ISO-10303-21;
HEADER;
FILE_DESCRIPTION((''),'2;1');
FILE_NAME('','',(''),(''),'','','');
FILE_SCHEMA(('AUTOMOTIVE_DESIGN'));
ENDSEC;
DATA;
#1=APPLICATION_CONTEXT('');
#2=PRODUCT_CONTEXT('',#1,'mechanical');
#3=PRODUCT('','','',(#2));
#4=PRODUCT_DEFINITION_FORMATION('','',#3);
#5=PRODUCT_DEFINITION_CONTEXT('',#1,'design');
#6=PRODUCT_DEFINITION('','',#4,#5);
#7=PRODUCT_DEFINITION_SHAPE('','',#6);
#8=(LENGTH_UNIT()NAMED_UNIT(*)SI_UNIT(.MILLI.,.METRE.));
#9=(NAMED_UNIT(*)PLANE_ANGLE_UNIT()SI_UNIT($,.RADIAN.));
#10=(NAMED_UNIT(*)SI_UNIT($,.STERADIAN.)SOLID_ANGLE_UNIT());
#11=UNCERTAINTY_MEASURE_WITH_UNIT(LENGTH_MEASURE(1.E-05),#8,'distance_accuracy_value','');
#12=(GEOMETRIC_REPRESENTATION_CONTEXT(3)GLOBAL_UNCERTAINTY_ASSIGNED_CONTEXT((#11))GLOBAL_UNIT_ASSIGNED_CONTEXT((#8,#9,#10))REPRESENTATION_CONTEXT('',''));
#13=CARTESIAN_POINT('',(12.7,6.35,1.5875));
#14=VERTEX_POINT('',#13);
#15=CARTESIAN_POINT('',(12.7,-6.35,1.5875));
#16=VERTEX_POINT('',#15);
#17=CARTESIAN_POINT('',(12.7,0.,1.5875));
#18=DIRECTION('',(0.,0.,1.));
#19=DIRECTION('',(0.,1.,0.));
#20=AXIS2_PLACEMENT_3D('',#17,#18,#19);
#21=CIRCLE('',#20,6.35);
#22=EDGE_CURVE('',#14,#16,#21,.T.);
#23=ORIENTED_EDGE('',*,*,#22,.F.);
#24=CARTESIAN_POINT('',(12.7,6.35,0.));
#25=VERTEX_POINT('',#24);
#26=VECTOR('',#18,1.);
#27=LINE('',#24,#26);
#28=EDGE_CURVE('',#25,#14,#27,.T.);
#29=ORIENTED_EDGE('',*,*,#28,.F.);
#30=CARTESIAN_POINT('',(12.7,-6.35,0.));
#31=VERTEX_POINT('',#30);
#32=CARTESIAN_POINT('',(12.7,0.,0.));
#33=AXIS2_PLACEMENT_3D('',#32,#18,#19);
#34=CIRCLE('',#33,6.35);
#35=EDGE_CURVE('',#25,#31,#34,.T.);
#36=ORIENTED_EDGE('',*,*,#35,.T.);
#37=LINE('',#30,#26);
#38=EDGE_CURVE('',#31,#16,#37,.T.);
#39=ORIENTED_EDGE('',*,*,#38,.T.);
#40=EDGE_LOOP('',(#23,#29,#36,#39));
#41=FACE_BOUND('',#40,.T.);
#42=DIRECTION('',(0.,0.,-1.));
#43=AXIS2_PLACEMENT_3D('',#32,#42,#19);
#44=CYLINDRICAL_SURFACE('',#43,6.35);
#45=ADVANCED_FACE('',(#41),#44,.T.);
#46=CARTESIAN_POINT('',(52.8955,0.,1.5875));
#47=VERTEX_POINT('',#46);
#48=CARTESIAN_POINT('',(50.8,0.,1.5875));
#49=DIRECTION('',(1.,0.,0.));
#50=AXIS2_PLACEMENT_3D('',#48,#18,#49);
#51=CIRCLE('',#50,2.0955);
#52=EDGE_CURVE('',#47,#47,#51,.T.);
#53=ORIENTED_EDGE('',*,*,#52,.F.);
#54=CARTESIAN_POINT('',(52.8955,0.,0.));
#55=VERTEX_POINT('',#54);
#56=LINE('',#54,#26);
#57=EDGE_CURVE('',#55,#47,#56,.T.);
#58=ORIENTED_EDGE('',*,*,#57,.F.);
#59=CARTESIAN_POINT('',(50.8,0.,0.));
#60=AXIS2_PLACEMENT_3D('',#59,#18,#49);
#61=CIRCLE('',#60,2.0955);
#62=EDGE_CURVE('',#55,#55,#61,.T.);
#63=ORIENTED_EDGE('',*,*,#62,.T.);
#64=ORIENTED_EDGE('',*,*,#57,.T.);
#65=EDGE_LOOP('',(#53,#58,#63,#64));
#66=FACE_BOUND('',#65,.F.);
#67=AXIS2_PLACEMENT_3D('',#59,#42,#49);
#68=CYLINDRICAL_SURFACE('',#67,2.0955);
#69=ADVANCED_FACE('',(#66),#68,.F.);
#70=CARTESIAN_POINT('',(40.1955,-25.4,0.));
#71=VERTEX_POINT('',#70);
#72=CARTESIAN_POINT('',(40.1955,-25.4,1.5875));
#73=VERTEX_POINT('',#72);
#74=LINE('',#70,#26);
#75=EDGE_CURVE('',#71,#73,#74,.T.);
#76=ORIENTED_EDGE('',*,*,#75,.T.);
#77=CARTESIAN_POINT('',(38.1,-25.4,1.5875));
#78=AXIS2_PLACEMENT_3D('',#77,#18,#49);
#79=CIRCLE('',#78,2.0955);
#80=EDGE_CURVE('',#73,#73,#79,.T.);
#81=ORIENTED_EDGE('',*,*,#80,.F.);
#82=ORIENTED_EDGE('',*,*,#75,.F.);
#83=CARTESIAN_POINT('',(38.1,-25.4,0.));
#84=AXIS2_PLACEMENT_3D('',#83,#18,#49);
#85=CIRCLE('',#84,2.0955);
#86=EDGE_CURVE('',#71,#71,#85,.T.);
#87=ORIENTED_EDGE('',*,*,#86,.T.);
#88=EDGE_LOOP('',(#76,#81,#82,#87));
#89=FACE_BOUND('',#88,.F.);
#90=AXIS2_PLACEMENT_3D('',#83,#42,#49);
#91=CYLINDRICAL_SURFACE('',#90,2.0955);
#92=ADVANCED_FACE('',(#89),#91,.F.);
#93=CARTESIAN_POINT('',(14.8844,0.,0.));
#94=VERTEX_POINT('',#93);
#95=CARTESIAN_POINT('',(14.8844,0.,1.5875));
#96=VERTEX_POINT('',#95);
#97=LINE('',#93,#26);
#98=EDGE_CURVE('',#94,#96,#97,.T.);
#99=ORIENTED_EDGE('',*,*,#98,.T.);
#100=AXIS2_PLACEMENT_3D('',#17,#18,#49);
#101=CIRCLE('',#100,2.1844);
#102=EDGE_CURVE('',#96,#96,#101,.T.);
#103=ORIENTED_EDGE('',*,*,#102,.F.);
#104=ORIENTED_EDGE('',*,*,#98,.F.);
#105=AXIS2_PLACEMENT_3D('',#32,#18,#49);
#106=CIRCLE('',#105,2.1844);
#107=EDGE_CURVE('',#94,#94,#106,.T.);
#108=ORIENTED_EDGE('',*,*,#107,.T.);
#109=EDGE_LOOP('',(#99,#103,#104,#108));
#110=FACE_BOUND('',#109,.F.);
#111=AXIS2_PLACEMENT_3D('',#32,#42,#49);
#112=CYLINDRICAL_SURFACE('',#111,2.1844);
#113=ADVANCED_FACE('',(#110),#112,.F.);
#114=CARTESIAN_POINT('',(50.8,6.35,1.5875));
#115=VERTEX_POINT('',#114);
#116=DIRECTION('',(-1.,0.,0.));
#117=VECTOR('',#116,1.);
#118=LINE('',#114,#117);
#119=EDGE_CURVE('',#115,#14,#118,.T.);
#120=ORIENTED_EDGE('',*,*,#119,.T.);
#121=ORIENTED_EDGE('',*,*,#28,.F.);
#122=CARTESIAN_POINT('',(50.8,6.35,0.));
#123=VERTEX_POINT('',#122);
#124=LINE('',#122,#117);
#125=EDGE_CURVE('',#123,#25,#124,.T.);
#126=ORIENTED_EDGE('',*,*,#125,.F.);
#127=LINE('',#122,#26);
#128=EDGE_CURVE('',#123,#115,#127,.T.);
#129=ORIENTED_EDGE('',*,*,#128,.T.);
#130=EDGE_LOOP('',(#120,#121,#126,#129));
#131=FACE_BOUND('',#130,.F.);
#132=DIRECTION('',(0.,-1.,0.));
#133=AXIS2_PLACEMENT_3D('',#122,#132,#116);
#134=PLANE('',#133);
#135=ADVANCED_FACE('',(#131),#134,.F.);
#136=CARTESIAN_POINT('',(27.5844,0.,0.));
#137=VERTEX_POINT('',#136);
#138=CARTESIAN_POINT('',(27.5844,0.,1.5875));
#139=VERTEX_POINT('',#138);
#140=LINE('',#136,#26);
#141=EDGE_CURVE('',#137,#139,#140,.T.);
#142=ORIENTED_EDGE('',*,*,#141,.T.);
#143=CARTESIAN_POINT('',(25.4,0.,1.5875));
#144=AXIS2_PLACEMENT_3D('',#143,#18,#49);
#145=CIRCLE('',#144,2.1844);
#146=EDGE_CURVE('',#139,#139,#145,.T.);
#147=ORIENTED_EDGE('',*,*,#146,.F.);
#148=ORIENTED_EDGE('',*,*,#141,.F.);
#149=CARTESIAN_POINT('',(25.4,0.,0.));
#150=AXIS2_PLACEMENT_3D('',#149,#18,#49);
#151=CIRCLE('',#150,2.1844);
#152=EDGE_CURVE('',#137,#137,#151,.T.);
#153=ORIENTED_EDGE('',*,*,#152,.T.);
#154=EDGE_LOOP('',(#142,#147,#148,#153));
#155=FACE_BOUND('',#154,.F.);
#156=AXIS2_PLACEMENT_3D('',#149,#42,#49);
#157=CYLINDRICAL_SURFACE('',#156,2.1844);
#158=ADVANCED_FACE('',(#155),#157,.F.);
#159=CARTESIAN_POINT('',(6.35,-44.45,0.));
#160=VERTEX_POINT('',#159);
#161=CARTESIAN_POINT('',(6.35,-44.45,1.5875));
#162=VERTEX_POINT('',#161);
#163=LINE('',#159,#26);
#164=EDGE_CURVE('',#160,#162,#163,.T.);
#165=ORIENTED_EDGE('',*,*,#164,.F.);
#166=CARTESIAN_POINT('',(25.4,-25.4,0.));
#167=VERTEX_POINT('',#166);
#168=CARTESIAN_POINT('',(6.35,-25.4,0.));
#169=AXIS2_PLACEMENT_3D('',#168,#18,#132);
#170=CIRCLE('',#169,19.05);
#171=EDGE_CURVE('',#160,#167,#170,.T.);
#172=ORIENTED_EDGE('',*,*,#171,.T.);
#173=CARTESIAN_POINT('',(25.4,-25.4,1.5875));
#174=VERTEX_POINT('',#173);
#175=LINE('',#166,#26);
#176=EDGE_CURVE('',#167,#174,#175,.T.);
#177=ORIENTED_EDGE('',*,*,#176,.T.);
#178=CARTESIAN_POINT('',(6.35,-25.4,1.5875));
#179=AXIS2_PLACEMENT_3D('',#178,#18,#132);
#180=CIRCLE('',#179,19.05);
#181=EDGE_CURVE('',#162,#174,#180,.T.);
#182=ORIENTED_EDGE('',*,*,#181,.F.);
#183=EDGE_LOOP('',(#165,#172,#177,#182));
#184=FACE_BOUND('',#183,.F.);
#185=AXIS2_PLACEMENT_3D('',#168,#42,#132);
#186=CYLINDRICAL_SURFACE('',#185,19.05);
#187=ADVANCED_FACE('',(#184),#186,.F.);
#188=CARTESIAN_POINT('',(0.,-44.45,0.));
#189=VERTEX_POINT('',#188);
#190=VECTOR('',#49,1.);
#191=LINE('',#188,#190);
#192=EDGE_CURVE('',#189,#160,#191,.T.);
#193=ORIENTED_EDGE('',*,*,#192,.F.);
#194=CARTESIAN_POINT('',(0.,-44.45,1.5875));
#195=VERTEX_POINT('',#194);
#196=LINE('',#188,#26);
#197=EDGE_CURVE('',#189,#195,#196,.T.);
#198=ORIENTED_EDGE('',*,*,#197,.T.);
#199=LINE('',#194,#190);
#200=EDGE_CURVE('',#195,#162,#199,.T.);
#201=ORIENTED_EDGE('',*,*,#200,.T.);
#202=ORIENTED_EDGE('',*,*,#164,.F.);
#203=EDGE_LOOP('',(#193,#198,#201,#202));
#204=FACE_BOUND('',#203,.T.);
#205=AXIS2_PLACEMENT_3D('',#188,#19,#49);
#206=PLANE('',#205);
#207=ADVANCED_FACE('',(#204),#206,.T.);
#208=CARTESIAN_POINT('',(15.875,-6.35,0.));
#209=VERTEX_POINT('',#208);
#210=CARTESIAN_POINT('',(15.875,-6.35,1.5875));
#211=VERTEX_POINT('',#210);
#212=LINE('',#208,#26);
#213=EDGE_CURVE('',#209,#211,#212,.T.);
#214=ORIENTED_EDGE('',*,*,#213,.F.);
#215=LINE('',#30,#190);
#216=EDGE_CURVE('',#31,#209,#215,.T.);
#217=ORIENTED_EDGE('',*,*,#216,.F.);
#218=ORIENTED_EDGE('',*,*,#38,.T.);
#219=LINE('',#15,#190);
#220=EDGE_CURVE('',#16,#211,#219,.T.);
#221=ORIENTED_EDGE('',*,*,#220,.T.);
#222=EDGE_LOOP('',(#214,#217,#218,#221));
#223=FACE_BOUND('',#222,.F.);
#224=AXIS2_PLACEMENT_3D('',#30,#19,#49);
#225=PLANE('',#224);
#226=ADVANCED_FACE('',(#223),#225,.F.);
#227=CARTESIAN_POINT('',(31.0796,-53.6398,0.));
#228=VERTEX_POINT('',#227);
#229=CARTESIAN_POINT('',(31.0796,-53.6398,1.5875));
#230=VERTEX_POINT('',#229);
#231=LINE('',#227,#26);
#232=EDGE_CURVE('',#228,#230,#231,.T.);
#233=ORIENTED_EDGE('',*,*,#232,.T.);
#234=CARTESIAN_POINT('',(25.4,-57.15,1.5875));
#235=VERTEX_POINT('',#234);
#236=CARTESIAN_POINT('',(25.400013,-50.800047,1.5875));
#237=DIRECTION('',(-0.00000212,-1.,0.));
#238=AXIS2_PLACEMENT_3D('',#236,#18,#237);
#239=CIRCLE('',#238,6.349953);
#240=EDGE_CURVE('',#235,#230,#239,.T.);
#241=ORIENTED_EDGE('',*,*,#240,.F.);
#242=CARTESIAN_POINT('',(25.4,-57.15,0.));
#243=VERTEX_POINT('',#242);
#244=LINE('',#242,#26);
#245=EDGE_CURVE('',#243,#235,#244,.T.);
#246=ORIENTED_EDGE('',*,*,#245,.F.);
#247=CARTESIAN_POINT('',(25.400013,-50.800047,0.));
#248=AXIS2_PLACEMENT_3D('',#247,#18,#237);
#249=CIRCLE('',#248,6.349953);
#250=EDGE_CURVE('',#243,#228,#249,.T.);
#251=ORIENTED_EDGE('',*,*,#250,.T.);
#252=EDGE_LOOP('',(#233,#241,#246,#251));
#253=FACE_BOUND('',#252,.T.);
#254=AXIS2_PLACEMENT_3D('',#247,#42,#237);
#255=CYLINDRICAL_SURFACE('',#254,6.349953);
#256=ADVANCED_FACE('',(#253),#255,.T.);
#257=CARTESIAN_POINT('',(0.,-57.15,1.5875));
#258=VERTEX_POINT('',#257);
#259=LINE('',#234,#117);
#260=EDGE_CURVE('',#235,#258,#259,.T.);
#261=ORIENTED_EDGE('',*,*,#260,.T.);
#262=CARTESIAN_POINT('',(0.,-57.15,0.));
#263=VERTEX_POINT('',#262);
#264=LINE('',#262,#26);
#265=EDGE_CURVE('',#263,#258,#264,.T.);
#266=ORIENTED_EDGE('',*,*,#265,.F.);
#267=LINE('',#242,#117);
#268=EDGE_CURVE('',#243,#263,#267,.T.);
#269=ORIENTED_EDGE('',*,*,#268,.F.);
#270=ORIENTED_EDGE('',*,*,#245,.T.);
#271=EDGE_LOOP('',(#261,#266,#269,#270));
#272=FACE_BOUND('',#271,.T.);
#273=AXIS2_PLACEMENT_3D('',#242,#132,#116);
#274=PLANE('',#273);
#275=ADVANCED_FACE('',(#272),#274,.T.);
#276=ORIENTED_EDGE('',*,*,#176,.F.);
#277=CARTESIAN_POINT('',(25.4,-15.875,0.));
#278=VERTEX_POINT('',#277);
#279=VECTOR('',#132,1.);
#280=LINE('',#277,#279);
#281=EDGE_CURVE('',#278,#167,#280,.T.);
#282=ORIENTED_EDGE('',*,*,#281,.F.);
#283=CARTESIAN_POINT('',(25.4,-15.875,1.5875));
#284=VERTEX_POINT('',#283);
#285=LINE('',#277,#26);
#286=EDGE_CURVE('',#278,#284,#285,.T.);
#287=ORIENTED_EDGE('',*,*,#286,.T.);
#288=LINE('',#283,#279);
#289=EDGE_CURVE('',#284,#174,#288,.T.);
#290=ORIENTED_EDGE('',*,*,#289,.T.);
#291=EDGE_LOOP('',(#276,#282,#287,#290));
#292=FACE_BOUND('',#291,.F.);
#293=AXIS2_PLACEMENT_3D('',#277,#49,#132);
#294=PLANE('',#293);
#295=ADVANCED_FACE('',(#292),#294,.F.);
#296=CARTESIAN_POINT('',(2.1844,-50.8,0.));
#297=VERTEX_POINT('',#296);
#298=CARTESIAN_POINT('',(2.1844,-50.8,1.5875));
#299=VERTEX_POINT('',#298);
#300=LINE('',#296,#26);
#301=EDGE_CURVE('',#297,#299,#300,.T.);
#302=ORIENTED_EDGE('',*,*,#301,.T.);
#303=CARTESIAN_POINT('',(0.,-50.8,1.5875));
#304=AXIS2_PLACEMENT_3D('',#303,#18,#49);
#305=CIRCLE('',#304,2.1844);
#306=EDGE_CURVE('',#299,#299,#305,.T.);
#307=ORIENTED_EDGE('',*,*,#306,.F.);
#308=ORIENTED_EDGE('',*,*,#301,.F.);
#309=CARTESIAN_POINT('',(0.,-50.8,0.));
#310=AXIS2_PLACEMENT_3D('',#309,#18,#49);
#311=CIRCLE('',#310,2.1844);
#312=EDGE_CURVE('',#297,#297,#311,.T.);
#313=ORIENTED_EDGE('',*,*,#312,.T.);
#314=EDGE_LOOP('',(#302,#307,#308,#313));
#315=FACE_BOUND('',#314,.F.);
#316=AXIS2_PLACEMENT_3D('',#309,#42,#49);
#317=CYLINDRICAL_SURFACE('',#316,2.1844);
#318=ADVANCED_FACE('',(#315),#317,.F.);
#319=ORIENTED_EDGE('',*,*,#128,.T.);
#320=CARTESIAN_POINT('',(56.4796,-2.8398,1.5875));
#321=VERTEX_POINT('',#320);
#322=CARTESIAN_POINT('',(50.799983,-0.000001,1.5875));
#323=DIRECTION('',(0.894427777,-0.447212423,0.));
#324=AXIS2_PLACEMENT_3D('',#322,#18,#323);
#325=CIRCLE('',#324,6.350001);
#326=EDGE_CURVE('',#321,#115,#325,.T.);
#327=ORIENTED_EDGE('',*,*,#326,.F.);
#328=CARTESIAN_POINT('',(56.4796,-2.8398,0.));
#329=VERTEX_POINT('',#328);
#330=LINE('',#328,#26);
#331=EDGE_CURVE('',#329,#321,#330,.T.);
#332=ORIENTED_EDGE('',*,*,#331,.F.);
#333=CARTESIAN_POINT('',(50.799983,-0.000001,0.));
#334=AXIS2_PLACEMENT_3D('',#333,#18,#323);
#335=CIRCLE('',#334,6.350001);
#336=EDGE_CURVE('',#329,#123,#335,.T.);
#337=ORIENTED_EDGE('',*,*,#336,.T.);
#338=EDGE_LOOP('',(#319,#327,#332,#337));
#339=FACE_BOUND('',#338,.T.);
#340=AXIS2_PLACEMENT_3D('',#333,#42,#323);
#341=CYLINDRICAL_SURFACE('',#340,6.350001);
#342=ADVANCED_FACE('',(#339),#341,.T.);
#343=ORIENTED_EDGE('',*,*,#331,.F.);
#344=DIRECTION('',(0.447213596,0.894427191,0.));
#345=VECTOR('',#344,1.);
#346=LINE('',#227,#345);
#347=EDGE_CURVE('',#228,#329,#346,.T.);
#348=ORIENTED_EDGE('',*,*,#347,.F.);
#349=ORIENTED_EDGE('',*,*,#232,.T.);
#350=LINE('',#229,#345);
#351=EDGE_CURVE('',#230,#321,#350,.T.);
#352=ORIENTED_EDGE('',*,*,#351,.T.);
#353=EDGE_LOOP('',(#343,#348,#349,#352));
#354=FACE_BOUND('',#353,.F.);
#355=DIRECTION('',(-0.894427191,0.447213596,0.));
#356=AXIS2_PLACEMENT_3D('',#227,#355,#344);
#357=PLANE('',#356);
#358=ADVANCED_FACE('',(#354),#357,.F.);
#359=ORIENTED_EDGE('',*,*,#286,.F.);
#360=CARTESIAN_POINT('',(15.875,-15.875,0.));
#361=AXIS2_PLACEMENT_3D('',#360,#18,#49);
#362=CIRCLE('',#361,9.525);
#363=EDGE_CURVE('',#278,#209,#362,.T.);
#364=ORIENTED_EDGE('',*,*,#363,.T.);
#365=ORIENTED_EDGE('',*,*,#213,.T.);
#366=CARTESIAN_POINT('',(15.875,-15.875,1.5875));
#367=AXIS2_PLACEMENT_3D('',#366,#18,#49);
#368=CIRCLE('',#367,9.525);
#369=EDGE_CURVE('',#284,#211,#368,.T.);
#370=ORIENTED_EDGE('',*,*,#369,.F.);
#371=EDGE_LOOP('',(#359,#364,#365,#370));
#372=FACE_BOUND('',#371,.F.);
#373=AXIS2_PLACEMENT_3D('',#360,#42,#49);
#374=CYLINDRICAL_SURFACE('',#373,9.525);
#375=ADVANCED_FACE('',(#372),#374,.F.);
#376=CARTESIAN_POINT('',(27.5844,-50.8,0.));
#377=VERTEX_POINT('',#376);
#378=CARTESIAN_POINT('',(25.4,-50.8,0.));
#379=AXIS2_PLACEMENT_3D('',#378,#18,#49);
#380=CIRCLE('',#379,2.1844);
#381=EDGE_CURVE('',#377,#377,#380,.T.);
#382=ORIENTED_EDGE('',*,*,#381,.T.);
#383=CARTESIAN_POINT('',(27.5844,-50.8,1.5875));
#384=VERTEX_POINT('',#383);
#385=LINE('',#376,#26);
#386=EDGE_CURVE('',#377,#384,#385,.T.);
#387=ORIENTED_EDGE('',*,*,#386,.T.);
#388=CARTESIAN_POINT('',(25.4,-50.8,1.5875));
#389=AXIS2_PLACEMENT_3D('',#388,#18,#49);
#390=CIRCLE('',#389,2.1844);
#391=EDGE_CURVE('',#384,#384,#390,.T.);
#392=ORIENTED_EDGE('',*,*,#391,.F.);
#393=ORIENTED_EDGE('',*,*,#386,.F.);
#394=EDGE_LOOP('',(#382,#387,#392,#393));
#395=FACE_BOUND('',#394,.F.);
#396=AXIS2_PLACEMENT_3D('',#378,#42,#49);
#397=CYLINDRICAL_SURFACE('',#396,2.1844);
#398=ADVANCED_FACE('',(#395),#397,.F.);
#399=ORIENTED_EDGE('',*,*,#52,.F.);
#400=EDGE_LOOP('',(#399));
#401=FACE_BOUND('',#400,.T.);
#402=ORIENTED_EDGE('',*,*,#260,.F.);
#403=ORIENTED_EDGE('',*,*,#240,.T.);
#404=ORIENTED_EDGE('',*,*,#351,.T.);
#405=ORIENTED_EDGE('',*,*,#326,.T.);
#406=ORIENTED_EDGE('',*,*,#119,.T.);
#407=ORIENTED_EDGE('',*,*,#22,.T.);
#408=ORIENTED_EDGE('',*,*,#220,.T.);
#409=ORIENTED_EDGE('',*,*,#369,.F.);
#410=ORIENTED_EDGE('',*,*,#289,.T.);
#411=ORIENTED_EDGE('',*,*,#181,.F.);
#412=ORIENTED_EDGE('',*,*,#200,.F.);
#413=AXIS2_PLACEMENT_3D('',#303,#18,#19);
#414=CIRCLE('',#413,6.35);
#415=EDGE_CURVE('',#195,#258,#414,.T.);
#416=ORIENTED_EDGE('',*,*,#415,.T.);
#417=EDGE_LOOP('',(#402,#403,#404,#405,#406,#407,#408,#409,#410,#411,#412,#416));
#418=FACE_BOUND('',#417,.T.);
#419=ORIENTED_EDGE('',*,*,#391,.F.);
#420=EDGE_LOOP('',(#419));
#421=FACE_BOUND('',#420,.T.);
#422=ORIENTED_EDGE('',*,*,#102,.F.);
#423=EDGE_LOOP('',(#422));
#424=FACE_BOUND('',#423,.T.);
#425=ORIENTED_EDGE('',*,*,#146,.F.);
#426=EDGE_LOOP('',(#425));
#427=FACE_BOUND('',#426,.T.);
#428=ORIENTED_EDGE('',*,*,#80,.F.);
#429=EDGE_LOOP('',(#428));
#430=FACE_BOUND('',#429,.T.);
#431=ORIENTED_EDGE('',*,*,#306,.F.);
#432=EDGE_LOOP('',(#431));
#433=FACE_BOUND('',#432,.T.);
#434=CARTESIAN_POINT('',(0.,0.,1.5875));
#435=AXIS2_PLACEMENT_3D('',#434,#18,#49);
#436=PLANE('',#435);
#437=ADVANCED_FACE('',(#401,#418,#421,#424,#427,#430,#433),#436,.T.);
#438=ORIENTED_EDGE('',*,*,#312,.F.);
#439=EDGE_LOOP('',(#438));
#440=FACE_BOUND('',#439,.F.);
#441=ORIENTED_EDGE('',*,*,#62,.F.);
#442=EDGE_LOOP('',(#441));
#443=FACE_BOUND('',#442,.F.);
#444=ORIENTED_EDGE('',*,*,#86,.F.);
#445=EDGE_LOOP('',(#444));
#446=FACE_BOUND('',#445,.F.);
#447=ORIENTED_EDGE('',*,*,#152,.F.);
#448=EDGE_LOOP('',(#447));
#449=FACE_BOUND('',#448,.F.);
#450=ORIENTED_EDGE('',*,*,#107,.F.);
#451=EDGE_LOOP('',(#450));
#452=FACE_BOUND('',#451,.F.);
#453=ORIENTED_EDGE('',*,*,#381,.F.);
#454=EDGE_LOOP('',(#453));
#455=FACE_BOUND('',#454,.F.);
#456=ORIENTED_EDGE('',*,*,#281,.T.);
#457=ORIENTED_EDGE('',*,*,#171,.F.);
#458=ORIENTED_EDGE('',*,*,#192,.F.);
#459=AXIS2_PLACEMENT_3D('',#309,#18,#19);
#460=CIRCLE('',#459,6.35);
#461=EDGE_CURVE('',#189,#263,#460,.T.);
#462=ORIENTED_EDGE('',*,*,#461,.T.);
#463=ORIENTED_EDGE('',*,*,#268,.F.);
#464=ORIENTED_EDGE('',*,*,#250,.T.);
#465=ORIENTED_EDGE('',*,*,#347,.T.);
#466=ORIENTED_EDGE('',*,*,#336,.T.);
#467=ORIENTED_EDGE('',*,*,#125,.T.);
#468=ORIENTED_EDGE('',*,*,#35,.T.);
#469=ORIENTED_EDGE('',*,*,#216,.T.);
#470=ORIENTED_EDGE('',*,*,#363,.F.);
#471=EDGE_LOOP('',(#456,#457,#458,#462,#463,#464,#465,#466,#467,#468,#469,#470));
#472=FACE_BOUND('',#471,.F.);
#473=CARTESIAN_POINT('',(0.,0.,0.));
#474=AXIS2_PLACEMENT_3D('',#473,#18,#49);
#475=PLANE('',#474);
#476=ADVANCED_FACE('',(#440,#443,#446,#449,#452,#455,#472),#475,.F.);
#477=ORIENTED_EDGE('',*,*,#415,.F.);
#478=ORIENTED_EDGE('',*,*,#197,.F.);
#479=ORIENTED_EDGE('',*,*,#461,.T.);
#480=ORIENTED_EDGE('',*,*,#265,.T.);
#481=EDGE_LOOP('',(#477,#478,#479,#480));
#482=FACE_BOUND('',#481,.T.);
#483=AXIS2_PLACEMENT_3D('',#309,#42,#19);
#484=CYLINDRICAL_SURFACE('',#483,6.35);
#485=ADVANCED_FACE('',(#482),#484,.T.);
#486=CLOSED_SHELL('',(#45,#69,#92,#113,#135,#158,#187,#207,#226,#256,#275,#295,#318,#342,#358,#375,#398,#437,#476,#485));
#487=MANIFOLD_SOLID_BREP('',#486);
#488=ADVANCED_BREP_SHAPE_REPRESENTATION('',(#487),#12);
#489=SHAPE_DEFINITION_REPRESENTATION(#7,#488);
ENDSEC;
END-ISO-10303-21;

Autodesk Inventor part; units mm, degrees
ref_plane "YZ Plane" through (0, 0, 0) normal (1, 0, 0) x (0, 1, 0)
ref_plane "XZ Plane" through (0, 0, 0) normal (0, 1, 0) x (-1, 0, 0)
ref_plane "XY Plane" through (0, 0, 0) normal (0, 0, 1) x (1, 0, 0)
sketch "main" plane through (0, 0, 0) normal (0, 0, 1) x (1, 0, 0)
  circle A0 centre (20.1733, 30.7236) radius 2.0955
  arc A1 (-24.2767, -13.7264) -> (-5.2267, 5.3236) centre (-24.2767, 5.3236) ccw
  line L0 (-5.2267, 14.8486) -> (-5.2267, 5.3236)
  line L1 (0.4529, -22.9162) -> (25.8529, 27.8838)
  arc A2 (-5.2267, 14.8486) -> (-14.7517, 24.3736) centre (-14.7517, 14.8486) ccw
  line L2 (-17.9267, 24.3736) -> (-14.7517, 24.3736)
  arc A3 (25.8529, 27.8838) -> (20.1733, 37.0736) centre (20.1733, 30.7236) ccw
  line L3 (20.1733, 37.0736) -> (-17.9267, 37.0736)
  line L4 (-30.6267, -13.7264) -> (-24.2767, -13.7264)
  circle A4 centre (-5.2267, -20.0764) radius 2.1844
  arc A5 (-5.2267, -26.4264) -> (0.4529, -22.9162) centre (-5.2267, -20.0764) ccw
  line L5 (-5.2267, -26.4264) -> (-30.6267, -26.4264)
  line L6 (-5.2267, -26.4264) -> (-30.6267, -26.4264)
  circle A6 centre (-30.6267, -20.0764) radius 2.1844
  arc A7 (-30.6267, -13.7264) -> (-30.6267, -26.4264) centre (-30.6267, -20.0764) ccw
  circle A8 centre (-5.2267, 30.7236) radius 2.1844
  circle A9 centre (7.4733, 5.3236) radius 2.0955
  arc A10 (-17.9267, 37.0736) -> (-17.9267, 24.3736) centre (-17.9267, 30.7236) ccw
  circle A11 centre (-17.9267, 30.7236) radius 2.1844
  point P0 (-10.623, 1.8831)
  point P1 (-5.2267, -13.7264)
  dimension "d0" = 12.7
  dimension "d1" = 12.7
  dimension "d2" = 4.3688
  dimension "d3" = 19.05
  dimension "d4" = 9.525
  dimension "d7" = 4.3688
  dimension "d8" = 4.191
  dimension "d10" = 4.191
sketch "Sketch1" plane through (0, 0, 0) normal (0, 0, 1) x (1, 0, 0)
  circle A0 centre (50.8, 0) radius 2.0955
  arc A1 (6.35, -44.45) -> (25.4, -25.4) centre (6.35, -25.4) ccw
  line L0 (25.4, -15.875) -> (25.4, -25.4)
  line L1 (31.0796, -53.6398) -> (56.4796, -2.8398)
  arc A2 (25.4, -15.875) -> (15.875, -6.35) centre (15.875, -15.875) ccw
  line L2 (12.7, -6.35) -> (15.875, -6.35)
  arc A3 (56.4796, -2.8398) -> (50.8, 6.35) centre (50.8, 0) ccw
  line L3 (50.8, 6.35) -> (12.7, 6.35)
  line L4 (0, -44.45) -> (6.35, -44.45)
  circle A4 centre (25.4, -50.8) radius 2.1844
  arc A5 (25.4, -57.15) -> (31.0796, -53.6398) centre (25.4, -50.8) ccw
  line L5 (25.4, -57.15) -> (0, -57.15)
  line L6 (25.4, -57.15) -> (0, -57.15)
  circle A6 centre (0, -50.8) radius 2.1844
  arc A7 (0, -44.45) -> (0, -57.15) centre (0, -50.8) ccw
  circle A8 centre (25.4, 0) radius 2.1844
  circle A9 centre (38.1, -25.4) radius 2.0955
  arc A10 (12.7, 6.35) -> (12.7, -6.35) centre (12.7, 0) ccw
  circle A11 centre (12.7, 0) radius 2.1844
  point P0 (0, 0)
extrude "Extrusion1" add sketch "Sketch1" along normal blind 1.5875
properties part number "gusset" material "Acetal Resin, White"
